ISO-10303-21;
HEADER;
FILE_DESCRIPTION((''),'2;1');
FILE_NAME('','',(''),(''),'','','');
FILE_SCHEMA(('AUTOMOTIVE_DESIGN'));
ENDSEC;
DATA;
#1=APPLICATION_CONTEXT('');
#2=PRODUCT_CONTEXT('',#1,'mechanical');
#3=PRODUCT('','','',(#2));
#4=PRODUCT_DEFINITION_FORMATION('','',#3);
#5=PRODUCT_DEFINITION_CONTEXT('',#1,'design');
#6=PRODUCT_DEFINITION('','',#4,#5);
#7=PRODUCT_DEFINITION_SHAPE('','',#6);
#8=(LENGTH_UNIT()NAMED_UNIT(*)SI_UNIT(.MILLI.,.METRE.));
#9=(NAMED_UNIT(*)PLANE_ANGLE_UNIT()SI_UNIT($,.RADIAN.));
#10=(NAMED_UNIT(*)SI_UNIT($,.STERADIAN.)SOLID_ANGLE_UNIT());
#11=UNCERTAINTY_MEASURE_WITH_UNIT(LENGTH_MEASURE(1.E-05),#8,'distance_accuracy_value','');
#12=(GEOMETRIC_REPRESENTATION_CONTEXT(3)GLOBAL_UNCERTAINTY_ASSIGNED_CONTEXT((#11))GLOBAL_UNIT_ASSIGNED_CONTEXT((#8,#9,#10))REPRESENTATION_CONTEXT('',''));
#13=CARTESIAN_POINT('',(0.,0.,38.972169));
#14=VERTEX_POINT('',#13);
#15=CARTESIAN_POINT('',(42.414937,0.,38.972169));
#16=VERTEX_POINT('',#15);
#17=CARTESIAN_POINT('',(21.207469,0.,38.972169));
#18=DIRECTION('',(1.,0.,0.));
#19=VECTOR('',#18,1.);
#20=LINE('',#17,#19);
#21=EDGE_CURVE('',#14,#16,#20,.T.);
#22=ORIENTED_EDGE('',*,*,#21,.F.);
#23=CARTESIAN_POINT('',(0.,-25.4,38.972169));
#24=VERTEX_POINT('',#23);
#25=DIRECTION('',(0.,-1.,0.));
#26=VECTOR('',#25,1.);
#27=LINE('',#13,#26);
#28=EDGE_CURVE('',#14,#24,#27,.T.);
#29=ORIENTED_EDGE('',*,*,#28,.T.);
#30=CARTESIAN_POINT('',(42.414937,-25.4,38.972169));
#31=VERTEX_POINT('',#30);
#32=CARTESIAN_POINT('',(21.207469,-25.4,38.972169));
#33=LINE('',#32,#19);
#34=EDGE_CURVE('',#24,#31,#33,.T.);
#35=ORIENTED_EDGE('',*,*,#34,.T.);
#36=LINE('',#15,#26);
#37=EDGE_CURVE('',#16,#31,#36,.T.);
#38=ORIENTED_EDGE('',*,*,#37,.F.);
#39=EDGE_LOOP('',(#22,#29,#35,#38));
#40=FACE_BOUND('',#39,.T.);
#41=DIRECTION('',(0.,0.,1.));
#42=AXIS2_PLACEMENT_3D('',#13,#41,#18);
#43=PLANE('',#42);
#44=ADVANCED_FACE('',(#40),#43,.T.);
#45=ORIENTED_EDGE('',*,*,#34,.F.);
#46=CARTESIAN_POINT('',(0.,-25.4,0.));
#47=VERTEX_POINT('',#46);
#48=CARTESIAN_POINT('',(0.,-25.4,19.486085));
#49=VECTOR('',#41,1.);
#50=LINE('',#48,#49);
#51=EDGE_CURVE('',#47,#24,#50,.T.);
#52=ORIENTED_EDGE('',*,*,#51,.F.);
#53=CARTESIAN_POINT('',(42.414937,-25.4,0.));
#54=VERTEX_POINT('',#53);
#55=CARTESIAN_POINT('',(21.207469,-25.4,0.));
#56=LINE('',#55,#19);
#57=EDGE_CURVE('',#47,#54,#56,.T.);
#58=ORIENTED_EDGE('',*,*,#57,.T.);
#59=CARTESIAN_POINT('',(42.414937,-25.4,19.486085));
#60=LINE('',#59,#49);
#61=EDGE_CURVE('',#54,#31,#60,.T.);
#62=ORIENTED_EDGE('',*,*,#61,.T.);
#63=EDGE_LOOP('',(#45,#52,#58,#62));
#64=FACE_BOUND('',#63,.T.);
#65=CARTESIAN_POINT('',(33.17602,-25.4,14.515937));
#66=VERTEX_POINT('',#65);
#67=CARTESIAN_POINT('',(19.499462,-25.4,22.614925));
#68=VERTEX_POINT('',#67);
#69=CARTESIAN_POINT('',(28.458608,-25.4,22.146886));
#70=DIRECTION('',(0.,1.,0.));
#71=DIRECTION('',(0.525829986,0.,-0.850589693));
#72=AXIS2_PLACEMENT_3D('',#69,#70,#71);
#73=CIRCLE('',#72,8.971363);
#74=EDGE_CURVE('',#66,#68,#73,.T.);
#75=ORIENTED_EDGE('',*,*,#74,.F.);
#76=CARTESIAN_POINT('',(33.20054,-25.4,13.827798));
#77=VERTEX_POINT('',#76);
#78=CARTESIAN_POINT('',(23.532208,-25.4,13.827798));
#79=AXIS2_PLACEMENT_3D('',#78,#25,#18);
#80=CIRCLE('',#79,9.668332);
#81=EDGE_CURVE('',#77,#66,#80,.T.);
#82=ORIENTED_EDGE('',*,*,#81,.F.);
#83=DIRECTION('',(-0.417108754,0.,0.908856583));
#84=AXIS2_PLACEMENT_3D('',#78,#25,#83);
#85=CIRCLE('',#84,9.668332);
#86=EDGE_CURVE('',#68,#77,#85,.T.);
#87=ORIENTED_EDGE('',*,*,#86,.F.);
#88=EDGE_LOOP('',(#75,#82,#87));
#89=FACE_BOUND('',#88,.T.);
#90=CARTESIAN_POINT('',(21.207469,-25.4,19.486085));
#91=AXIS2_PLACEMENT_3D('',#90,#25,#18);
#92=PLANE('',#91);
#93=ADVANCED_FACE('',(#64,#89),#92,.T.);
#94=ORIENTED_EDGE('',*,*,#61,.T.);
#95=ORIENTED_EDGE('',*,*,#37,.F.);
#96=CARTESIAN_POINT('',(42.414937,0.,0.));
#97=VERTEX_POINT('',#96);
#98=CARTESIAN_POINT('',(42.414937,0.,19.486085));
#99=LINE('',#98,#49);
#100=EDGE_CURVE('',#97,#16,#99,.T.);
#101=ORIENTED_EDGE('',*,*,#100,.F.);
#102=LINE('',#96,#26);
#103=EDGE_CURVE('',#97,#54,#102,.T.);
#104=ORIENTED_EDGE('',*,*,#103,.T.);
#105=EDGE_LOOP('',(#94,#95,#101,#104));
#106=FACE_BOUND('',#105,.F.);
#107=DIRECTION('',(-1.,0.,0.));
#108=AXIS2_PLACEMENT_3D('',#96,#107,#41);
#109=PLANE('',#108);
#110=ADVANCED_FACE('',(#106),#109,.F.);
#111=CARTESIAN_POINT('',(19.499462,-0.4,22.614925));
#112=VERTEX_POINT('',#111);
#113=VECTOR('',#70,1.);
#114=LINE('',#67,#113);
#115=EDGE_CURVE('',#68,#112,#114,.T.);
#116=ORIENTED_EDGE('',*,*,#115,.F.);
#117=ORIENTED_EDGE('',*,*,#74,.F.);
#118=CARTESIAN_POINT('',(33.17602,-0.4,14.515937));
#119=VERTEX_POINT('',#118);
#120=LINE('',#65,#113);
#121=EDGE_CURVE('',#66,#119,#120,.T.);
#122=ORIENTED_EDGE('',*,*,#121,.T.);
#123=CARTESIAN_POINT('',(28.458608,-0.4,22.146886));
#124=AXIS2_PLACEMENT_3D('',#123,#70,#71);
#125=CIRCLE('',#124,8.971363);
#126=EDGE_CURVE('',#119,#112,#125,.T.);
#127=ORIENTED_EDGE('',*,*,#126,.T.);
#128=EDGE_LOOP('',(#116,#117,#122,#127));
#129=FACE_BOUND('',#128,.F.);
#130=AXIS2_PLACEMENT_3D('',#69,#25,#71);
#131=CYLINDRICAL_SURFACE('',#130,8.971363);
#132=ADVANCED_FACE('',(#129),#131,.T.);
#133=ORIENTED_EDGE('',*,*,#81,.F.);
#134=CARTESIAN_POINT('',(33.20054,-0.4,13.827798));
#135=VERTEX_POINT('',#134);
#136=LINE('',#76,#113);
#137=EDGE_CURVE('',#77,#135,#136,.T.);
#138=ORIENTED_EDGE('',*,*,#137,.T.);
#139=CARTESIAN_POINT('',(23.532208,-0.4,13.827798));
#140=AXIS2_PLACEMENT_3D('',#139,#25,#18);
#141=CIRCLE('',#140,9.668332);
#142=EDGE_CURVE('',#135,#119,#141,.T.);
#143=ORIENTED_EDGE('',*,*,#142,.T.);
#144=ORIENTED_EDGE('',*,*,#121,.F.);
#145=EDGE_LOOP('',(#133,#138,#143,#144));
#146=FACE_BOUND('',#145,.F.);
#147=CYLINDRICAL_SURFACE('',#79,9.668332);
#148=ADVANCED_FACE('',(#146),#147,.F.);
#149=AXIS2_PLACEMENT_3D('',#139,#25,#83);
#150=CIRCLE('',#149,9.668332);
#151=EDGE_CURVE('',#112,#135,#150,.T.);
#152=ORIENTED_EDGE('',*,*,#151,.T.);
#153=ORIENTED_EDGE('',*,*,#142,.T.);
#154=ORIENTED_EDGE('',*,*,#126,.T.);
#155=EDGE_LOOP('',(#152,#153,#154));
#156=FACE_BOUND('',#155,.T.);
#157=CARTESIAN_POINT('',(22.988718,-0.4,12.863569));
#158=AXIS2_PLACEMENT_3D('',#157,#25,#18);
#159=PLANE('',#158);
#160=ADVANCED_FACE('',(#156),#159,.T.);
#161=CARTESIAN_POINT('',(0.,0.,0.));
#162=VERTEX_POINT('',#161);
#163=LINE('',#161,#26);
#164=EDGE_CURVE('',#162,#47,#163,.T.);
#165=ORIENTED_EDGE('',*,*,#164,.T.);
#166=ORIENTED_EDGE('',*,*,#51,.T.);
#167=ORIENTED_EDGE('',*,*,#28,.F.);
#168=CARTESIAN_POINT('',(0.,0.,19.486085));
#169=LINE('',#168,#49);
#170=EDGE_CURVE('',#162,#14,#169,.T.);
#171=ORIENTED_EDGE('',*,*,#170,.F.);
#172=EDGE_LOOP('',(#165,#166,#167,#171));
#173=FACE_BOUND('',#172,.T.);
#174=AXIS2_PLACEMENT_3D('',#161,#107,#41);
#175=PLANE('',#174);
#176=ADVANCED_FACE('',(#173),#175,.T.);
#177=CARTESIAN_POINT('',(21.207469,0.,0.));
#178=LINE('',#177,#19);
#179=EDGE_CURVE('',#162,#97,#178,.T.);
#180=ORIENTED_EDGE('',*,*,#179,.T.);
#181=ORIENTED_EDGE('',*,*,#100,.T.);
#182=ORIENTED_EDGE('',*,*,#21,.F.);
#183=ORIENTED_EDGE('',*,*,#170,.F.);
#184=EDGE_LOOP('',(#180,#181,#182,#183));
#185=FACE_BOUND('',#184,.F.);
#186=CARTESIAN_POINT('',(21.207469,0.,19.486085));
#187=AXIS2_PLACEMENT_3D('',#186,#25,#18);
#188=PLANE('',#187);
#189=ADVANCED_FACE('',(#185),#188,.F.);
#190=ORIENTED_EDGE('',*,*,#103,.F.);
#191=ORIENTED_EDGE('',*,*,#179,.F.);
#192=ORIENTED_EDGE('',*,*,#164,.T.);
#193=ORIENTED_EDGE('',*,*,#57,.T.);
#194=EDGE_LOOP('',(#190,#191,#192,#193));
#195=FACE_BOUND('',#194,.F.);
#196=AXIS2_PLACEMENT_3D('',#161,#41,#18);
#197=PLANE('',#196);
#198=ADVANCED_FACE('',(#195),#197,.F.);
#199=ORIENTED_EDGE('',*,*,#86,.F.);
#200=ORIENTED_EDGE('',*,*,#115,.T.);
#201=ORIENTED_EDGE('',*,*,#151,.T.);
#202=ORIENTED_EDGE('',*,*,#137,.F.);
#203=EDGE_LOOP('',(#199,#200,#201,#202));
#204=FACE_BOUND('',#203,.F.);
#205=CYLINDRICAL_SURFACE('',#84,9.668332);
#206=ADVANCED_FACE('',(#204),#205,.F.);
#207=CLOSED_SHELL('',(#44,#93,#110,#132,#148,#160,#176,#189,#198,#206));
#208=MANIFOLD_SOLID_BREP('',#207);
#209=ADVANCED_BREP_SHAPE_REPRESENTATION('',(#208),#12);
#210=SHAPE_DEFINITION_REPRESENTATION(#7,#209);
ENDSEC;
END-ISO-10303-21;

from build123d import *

# Parameters (mm, degrees)
F0_W     = 42.4149371684
F0_H     = 38.9721691608
F1_DEPTH = 25.4
F5_DEPTH = 25


# Not quite as in the source:
# - the program builds the solid bodies; features that only make, move or delete a surface that nothing else refers to are left out


with BuildPart() as f1:
    # F0 (on Front) → F1 (new body)
    with BuildSketch(Plane.XZ):
        with Locations((21.2074685842, 19.4860845804)):
            Rectangle(F0_W, F0_H)
    extrude(amount=F1_DEPTH)

    # F4 (on face) → F5 (cut)
    with BuildSketch(Plane.XZ.offset(25.4)):
        with BuildLine():
            ThreePointArc((19.4994620307, 22.614925386), (18.3126908163, 5.6894142875), (33.200540329, 13.8277979568))
            ThreePointArc((33.200540329, 13.8277979568), (33.1944083659, 14.1720857887), (33.176020255, 14.5159369041))
            ThreePointArc((33.176020255, 14.5159369041), (23.8873414039, 14.4275027139), (19.4994620307, 22.614925386))
        make_face()
    extrude(amount=-F5_DEPTH, mode=Mode.SUBTRACT)


solid = f1.part
